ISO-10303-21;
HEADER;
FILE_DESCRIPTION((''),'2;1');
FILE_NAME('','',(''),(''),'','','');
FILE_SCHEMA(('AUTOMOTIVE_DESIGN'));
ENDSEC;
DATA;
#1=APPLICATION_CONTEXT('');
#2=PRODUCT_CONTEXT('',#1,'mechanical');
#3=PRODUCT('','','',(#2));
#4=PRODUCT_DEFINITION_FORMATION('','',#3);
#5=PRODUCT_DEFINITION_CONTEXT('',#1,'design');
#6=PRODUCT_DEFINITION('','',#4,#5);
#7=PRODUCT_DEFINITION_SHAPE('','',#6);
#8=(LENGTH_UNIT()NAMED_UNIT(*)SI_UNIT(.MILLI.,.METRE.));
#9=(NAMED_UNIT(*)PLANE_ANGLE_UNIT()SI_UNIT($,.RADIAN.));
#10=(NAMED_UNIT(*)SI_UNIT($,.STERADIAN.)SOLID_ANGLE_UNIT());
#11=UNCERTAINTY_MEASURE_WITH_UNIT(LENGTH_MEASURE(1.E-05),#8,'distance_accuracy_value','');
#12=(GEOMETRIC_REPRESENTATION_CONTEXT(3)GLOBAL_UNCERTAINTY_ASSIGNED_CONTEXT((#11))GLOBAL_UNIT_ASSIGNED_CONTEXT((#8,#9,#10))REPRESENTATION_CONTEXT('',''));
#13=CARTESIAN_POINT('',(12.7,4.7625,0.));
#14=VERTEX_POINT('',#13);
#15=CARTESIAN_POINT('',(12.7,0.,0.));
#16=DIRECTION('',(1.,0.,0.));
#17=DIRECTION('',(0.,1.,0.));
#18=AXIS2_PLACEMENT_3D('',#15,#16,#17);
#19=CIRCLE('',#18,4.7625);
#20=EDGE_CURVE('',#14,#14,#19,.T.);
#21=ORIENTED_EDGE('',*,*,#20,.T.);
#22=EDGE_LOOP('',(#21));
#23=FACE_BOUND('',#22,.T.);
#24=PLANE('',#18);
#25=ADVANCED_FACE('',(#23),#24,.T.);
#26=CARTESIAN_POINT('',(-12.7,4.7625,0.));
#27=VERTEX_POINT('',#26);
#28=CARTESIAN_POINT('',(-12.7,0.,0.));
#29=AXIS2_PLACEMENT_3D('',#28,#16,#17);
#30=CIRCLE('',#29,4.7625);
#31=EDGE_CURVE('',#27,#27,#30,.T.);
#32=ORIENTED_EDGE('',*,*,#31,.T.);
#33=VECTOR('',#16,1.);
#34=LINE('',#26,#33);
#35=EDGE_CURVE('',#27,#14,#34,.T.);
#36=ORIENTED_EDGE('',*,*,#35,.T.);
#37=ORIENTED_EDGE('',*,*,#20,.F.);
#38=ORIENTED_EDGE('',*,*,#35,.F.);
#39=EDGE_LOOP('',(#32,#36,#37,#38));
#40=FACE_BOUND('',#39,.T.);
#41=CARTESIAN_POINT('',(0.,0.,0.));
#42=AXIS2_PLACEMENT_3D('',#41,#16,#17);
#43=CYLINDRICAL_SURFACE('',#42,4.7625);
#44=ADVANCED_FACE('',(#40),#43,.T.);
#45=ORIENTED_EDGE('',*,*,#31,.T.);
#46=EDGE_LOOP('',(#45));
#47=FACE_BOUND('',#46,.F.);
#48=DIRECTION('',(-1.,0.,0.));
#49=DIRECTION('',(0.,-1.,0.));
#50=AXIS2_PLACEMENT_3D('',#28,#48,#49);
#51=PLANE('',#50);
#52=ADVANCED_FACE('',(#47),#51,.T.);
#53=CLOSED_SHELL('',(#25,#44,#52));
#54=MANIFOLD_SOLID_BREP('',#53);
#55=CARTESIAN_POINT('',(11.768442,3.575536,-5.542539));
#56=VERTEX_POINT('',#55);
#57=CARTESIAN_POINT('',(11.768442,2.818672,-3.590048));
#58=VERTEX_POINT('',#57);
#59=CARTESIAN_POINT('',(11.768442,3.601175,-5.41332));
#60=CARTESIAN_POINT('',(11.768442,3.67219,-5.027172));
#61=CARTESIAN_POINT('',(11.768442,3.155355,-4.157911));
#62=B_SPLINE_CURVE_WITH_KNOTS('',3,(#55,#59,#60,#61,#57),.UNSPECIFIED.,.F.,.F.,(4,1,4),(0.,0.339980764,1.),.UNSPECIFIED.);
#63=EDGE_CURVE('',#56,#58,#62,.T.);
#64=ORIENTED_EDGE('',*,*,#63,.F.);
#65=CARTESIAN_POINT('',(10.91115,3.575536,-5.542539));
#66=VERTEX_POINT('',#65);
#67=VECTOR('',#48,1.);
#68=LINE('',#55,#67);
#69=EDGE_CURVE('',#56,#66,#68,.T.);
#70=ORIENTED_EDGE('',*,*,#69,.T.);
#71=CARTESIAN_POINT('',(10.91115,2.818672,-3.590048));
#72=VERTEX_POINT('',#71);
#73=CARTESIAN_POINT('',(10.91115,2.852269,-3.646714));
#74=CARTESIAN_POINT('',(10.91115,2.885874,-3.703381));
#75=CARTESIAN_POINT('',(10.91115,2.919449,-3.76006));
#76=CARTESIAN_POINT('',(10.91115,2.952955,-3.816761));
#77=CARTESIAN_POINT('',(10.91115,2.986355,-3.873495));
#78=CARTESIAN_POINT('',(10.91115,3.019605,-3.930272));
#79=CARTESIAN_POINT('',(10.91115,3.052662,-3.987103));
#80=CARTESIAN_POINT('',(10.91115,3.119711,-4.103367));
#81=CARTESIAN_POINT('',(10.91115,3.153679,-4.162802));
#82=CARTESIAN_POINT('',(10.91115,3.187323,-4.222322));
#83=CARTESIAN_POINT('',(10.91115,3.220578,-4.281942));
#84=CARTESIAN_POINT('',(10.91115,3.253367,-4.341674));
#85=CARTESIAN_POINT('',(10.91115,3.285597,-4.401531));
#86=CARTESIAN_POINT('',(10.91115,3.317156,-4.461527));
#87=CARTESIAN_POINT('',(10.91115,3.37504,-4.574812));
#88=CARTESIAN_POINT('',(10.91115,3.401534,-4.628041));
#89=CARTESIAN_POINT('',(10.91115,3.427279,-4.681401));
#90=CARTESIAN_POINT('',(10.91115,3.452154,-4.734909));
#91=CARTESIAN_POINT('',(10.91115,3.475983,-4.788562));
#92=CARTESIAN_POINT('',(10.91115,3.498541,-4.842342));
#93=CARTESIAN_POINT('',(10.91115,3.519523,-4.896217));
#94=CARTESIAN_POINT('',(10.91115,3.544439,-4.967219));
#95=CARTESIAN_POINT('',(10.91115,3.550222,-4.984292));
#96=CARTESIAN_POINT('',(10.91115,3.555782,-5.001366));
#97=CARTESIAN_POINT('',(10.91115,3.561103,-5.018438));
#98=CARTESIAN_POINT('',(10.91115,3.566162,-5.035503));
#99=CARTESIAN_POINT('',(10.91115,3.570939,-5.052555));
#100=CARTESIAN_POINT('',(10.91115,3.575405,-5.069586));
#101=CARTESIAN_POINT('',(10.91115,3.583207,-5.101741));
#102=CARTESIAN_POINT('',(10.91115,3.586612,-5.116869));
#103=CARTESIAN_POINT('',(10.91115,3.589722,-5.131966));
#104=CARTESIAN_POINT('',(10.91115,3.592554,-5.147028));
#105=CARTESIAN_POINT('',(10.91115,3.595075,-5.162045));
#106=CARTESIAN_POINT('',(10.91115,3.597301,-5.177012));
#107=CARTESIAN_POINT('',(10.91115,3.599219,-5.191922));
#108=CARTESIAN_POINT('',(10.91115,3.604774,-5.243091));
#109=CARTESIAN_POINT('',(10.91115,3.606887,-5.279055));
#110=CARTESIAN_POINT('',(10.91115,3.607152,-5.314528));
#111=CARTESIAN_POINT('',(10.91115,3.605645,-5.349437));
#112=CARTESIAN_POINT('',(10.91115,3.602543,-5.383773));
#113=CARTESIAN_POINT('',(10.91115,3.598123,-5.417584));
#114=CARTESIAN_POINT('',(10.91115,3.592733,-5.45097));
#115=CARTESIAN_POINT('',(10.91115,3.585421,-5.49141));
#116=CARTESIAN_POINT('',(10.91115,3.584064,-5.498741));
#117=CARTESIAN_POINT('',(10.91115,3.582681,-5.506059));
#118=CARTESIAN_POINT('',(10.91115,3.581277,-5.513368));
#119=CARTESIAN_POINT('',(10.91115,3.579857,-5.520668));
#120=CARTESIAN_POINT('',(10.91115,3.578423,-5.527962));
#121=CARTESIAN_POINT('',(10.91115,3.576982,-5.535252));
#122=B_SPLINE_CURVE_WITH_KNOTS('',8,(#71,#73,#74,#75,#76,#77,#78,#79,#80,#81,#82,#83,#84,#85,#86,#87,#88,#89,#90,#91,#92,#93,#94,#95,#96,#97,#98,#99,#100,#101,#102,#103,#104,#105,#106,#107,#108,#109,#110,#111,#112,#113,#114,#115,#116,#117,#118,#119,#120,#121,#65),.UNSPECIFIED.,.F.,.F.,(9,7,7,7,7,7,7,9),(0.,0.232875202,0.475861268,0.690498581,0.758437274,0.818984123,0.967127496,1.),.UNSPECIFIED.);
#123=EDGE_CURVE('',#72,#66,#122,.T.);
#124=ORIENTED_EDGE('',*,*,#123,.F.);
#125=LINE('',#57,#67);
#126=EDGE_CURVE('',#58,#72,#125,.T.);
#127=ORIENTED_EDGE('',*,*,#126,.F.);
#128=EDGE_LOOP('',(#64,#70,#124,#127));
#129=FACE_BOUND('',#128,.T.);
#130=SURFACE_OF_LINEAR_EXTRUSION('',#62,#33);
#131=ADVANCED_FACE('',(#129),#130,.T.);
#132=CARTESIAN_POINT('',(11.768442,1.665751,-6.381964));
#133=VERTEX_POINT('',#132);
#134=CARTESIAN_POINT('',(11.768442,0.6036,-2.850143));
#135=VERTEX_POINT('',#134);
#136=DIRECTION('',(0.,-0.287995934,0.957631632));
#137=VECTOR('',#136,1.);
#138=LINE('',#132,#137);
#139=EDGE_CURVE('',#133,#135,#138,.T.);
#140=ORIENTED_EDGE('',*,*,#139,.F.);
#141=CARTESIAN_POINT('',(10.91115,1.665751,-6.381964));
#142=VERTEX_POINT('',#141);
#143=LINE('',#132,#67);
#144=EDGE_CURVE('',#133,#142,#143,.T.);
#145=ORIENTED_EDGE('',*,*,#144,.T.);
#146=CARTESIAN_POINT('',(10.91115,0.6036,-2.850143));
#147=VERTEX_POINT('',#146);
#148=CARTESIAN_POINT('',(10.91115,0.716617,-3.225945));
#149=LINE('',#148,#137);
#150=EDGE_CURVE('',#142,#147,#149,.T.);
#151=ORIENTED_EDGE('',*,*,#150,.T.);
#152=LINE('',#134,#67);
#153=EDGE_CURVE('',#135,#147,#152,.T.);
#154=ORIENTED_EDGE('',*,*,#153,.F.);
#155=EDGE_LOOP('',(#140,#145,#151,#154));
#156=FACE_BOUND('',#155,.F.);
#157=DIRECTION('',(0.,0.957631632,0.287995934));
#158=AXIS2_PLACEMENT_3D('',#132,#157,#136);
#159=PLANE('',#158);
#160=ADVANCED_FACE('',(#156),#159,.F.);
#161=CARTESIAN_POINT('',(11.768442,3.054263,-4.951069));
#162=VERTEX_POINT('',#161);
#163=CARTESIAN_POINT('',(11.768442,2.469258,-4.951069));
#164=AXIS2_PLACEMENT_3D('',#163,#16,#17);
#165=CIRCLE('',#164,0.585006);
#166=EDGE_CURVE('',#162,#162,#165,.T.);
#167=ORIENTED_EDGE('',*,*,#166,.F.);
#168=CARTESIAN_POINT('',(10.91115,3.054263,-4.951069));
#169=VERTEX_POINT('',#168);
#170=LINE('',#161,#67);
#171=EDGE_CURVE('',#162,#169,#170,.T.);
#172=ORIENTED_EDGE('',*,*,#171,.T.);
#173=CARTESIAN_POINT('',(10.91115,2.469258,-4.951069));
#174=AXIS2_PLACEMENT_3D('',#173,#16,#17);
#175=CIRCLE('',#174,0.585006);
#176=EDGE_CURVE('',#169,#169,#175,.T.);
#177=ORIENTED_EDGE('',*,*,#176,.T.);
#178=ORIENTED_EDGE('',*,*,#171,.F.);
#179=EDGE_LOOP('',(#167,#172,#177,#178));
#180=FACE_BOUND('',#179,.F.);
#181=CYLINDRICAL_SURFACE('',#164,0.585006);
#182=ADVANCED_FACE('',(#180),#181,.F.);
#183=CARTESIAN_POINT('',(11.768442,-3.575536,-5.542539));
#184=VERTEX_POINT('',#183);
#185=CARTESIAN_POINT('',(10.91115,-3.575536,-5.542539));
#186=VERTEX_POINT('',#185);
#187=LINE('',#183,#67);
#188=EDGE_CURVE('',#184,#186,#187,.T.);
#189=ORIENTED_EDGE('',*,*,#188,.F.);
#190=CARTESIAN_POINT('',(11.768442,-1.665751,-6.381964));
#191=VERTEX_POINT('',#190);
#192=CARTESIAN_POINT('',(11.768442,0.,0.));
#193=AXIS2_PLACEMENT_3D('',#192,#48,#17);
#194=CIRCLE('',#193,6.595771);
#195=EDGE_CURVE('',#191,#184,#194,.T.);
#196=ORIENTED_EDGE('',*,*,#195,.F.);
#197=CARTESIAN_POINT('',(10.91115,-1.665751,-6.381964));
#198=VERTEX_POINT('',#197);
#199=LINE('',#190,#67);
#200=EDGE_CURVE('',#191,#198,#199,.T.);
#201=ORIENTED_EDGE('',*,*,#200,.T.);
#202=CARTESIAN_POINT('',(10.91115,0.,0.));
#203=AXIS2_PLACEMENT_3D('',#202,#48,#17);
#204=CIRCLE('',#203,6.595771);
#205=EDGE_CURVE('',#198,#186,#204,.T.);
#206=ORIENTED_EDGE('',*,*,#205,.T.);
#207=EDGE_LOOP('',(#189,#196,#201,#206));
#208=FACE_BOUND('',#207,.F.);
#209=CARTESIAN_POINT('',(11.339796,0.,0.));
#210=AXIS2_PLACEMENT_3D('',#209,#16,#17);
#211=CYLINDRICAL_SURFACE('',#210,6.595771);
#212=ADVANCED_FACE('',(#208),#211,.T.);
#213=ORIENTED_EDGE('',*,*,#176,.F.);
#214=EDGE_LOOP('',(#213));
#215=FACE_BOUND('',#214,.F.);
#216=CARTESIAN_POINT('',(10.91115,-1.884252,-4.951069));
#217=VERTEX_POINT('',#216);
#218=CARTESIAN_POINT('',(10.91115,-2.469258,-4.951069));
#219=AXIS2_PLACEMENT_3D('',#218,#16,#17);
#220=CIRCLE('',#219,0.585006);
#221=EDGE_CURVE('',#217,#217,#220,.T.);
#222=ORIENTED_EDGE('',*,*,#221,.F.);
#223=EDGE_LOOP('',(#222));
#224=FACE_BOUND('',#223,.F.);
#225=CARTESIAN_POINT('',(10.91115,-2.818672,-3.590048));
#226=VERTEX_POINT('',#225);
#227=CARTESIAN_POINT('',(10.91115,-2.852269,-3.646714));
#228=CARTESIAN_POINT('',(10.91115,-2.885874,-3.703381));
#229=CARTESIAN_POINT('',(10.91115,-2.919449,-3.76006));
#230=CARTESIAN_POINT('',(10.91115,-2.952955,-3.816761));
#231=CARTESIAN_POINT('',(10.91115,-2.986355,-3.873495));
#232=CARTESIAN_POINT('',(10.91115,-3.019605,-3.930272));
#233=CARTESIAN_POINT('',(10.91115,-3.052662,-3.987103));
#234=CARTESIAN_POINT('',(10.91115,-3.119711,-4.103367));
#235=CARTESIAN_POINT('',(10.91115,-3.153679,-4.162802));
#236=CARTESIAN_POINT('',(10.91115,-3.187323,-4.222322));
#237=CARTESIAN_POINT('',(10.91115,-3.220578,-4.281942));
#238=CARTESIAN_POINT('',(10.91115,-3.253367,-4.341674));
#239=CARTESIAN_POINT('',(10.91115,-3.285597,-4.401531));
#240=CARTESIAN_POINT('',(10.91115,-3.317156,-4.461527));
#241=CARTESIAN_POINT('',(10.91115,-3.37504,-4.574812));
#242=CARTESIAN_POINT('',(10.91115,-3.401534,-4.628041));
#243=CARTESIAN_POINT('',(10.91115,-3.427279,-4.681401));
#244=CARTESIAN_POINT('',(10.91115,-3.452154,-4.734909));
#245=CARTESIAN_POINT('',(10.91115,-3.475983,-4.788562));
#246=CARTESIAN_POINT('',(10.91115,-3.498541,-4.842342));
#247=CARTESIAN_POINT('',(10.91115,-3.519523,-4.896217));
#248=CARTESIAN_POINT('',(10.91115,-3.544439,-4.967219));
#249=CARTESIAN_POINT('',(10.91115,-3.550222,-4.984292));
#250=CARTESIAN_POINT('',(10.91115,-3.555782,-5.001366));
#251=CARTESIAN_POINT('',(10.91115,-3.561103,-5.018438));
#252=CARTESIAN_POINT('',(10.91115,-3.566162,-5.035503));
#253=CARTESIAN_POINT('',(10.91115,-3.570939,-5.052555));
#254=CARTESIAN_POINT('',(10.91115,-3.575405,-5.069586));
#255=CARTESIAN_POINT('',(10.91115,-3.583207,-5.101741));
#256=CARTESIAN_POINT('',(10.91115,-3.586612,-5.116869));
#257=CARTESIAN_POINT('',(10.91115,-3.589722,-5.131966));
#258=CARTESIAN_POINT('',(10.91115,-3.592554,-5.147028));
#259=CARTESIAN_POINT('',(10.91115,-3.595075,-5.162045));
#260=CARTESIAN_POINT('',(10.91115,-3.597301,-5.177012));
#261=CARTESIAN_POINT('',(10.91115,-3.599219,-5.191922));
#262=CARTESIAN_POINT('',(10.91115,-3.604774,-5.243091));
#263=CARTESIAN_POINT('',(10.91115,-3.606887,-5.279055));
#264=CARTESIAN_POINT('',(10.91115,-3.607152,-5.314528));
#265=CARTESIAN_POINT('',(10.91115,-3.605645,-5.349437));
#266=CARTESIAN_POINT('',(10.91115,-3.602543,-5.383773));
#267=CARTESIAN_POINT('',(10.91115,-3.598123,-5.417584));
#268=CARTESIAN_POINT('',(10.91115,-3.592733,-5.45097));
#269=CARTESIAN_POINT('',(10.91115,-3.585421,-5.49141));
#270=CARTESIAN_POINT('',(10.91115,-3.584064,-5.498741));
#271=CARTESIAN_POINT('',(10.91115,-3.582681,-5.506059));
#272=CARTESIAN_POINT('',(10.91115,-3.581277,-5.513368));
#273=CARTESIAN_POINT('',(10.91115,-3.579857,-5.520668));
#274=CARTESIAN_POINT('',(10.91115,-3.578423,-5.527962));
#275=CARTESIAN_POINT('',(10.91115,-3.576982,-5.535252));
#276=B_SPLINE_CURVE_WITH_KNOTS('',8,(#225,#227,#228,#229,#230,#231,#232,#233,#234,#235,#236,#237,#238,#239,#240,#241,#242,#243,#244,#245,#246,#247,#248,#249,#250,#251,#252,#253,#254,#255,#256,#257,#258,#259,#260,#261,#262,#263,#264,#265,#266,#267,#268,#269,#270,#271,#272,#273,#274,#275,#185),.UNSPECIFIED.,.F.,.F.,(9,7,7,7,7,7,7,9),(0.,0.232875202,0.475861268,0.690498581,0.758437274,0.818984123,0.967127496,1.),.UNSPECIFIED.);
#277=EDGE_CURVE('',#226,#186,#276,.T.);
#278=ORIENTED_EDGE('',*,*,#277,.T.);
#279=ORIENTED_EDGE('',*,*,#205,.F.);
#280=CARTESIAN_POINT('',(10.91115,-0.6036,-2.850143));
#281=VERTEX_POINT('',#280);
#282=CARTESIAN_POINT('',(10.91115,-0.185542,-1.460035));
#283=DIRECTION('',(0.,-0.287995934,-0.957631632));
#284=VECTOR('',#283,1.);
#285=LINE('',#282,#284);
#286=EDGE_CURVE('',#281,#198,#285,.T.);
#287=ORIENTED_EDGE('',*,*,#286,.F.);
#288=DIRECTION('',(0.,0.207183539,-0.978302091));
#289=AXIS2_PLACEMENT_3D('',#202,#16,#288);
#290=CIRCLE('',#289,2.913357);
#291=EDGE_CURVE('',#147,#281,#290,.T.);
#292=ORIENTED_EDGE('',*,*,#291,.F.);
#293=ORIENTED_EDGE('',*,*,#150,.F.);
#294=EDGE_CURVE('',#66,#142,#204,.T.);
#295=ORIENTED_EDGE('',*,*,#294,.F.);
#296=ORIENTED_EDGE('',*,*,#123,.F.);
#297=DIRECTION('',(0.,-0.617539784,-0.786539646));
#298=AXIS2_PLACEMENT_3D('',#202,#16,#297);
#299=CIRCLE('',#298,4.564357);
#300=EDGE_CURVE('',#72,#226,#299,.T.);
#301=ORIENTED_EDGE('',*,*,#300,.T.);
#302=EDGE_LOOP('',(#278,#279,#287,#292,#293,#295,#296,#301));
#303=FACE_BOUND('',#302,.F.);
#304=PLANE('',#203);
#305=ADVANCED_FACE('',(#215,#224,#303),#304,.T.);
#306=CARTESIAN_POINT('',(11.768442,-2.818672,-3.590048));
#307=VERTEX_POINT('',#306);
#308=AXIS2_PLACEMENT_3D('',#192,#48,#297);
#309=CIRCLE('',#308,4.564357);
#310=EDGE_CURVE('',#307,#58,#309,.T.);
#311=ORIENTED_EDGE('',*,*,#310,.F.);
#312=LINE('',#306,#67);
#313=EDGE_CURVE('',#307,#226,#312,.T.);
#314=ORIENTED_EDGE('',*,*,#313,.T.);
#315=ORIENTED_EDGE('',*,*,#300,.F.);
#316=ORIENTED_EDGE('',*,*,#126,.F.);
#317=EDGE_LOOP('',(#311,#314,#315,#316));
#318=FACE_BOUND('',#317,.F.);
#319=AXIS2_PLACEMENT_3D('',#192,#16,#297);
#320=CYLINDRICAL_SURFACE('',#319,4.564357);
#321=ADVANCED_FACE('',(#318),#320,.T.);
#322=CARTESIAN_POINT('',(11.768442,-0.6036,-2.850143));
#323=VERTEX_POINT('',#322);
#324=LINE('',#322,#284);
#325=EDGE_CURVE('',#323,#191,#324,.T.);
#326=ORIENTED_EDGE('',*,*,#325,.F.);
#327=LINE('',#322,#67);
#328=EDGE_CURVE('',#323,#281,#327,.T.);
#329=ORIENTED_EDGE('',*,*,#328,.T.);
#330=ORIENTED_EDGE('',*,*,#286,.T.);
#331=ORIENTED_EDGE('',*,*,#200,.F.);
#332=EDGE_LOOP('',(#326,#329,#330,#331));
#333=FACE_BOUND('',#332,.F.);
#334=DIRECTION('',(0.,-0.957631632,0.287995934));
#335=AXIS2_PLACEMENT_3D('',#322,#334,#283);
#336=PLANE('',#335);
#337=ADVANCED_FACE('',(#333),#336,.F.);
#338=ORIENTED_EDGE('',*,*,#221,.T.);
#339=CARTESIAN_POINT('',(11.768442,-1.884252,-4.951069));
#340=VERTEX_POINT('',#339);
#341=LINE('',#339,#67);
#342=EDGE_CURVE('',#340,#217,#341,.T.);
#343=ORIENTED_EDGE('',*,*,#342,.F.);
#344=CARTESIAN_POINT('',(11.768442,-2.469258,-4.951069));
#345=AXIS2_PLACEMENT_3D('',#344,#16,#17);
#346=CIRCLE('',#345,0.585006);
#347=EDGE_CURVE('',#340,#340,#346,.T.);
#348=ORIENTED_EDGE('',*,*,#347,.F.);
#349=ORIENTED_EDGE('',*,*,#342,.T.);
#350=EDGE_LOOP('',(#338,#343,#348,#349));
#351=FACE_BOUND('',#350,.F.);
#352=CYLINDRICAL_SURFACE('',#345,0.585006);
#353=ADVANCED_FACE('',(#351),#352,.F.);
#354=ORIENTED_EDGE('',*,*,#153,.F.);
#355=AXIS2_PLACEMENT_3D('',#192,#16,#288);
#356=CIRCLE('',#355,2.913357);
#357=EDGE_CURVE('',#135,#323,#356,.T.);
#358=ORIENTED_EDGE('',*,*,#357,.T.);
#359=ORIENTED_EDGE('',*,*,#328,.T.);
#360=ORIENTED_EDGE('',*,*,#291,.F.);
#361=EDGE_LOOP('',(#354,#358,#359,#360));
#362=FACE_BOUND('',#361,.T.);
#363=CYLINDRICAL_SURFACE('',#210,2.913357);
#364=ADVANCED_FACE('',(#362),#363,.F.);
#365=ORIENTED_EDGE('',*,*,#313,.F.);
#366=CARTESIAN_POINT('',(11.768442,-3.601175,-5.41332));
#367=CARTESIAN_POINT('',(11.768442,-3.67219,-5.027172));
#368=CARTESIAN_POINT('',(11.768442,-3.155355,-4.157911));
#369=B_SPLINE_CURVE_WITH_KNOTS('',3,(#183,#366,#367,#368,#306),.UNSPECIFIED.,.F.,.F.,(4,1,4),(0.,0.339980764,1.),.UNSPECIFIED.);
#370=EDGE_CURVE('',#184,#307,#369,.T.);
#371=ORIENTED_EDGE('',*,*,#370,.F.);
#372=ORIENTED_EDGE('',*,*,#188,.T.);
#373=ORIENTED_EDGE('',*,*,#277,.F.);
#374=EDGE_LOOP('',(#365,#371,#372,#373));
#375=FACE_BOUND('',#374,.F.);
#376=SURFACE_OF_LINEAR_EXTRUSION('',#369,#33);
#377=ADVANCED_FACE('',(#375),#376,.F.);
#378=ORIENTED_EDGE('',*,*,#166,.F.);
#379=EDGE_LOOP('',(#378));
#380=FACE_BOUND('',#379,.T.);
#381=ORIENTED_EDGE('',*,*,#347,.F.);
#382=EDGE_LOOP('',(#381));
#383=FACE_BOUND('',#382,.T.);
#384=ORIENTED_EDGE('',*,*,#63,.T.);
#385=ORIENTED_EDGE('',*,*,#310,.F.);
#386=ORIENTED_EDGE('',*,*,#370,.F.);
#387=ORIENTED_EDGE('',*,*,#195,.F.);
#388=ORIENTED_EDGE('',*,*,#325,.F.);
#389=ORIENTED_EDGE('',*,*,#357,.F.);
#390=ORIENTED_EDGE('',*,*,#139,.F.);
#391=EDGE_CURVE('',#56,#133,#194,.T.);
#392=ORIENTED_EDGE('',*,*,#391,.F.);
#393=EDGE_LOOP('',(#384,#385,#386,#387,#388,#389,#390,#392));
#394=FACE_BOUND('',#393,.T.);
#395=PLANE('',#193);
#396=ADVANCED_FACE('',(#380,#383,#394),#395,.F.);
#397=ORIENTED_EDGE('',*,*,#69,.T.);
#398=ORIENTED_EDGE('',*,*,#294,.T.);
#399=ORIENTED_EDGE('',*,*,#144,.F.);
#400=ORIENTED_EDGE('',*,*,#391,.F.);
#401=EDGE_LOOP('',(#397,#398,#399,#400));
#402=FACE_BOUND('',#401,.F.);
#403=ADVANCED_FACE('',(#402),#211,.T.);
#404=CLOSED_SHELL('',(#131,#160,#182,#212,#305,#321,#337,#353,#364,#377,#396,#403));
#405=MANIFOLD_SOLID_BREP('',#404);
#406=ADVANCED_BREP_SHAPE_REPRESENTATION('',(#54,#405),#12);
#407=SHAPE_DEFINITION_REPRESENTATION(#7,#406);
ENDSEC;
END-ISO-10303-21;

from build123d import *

# Parameters (mm, degrees)
F0_R     = 4.7625
F1_DEPTH = 12.7
F2_W     = 0.8572917432
F2_H     = 3.6824136041
F5_R     = 0.5850055068
F6_DEPTH = 25.4


with BuildPart() as f1:
    # F0 (on Right) → F1 (new body)
    with BuildSketch(Plane.YZ):
        Circle(F0_R)
    extrude(amount=F1_DEPTH)

    # F4: F1 across plane


with BuildPart() as f3:
    # F2 (on Top) → F3 (revolve)
    with BuildSketch(Plane.XY):
        with Locations((11.3397957757, 4.7545640264)):
            Rectangle(F2_W, F2_H)
    revolve(axis=Axis((11.6089691874, 0, 0), (-1, 0, 0)))

    # F5 (on face) → F6 (cut)
    with BuildSketch(Plane.YZ.offset(11.7684416473)):
        with BuildLine():
            ThreePointArc((0.6035996611, -2.850143464), (0, -2.9133572243), (-0.6035996611, -2.850143464))
            Line((-0.6035996611, -2.850143464), (-1.6657512694, -6.3819640809))
            ThreePointArc((-1.6657512694, -6.3819640809), (0, -6.5957708284), (1.6657512694, -6.3819640809))
            Line((1.6657512694, -6.3819640809), (0.6035996611, -2.850143464))
        make_face()
        with BuildLine():
            ThreePointArc((6.5957708284, 0), (-3.156008436, 5.7917012676), (-3.5755357392, -5.5425388586))
            add(Edge.make_bspline(
                [(-3.5755357392, -5.5425388586), (-3.6011746585, -5.4133196937), (-3.6721900788, -5.0271716823), (-3.1553549859, -4.1579107621), (-2.8186723188, -3.5900480977)],
                knots=[0, 0, 0, 0, 0.3399807639, 1, 1, 1, 1], degree=3))
            ThreePointArc((-2.8186723188, -3.5900480977), (0, 4.5643574558), (2.8186723188, -3.5900480977))
            add(Edge.make_bspline(
                [(3.5755357392, -5.5425388586), (3.6011746585, -5.4133196937), (3.6721900788, -5.0271716823), (3.1553549859, -4.1579107621), (2.8186723188, -3.5900480977)],
                knots=[0, 0, 0, 0, 0.3399807639, 1, 1, 1, 1], degree=3))
            ThreePointArc((3.5755357392, -5.5425388586), (5.7917012676, -3.156008436), (6.5957708284, 0))
        make_face()
        with Locations((-2.4692576844, -4.9510691315)):
            Circle(F5_R)
        with Locations((2.4692576844, -4.9510691315)):
            Circle(F5_R)
    extrude(amount=-F6_DEPTH, mode=Mode.SUBTRACT)


with BuildPart() as f1_1:
    add(f1.part)
    add(f1.part.mirror(Plane.YZ))


solid = Compound([f3.part, f1_1.part])
